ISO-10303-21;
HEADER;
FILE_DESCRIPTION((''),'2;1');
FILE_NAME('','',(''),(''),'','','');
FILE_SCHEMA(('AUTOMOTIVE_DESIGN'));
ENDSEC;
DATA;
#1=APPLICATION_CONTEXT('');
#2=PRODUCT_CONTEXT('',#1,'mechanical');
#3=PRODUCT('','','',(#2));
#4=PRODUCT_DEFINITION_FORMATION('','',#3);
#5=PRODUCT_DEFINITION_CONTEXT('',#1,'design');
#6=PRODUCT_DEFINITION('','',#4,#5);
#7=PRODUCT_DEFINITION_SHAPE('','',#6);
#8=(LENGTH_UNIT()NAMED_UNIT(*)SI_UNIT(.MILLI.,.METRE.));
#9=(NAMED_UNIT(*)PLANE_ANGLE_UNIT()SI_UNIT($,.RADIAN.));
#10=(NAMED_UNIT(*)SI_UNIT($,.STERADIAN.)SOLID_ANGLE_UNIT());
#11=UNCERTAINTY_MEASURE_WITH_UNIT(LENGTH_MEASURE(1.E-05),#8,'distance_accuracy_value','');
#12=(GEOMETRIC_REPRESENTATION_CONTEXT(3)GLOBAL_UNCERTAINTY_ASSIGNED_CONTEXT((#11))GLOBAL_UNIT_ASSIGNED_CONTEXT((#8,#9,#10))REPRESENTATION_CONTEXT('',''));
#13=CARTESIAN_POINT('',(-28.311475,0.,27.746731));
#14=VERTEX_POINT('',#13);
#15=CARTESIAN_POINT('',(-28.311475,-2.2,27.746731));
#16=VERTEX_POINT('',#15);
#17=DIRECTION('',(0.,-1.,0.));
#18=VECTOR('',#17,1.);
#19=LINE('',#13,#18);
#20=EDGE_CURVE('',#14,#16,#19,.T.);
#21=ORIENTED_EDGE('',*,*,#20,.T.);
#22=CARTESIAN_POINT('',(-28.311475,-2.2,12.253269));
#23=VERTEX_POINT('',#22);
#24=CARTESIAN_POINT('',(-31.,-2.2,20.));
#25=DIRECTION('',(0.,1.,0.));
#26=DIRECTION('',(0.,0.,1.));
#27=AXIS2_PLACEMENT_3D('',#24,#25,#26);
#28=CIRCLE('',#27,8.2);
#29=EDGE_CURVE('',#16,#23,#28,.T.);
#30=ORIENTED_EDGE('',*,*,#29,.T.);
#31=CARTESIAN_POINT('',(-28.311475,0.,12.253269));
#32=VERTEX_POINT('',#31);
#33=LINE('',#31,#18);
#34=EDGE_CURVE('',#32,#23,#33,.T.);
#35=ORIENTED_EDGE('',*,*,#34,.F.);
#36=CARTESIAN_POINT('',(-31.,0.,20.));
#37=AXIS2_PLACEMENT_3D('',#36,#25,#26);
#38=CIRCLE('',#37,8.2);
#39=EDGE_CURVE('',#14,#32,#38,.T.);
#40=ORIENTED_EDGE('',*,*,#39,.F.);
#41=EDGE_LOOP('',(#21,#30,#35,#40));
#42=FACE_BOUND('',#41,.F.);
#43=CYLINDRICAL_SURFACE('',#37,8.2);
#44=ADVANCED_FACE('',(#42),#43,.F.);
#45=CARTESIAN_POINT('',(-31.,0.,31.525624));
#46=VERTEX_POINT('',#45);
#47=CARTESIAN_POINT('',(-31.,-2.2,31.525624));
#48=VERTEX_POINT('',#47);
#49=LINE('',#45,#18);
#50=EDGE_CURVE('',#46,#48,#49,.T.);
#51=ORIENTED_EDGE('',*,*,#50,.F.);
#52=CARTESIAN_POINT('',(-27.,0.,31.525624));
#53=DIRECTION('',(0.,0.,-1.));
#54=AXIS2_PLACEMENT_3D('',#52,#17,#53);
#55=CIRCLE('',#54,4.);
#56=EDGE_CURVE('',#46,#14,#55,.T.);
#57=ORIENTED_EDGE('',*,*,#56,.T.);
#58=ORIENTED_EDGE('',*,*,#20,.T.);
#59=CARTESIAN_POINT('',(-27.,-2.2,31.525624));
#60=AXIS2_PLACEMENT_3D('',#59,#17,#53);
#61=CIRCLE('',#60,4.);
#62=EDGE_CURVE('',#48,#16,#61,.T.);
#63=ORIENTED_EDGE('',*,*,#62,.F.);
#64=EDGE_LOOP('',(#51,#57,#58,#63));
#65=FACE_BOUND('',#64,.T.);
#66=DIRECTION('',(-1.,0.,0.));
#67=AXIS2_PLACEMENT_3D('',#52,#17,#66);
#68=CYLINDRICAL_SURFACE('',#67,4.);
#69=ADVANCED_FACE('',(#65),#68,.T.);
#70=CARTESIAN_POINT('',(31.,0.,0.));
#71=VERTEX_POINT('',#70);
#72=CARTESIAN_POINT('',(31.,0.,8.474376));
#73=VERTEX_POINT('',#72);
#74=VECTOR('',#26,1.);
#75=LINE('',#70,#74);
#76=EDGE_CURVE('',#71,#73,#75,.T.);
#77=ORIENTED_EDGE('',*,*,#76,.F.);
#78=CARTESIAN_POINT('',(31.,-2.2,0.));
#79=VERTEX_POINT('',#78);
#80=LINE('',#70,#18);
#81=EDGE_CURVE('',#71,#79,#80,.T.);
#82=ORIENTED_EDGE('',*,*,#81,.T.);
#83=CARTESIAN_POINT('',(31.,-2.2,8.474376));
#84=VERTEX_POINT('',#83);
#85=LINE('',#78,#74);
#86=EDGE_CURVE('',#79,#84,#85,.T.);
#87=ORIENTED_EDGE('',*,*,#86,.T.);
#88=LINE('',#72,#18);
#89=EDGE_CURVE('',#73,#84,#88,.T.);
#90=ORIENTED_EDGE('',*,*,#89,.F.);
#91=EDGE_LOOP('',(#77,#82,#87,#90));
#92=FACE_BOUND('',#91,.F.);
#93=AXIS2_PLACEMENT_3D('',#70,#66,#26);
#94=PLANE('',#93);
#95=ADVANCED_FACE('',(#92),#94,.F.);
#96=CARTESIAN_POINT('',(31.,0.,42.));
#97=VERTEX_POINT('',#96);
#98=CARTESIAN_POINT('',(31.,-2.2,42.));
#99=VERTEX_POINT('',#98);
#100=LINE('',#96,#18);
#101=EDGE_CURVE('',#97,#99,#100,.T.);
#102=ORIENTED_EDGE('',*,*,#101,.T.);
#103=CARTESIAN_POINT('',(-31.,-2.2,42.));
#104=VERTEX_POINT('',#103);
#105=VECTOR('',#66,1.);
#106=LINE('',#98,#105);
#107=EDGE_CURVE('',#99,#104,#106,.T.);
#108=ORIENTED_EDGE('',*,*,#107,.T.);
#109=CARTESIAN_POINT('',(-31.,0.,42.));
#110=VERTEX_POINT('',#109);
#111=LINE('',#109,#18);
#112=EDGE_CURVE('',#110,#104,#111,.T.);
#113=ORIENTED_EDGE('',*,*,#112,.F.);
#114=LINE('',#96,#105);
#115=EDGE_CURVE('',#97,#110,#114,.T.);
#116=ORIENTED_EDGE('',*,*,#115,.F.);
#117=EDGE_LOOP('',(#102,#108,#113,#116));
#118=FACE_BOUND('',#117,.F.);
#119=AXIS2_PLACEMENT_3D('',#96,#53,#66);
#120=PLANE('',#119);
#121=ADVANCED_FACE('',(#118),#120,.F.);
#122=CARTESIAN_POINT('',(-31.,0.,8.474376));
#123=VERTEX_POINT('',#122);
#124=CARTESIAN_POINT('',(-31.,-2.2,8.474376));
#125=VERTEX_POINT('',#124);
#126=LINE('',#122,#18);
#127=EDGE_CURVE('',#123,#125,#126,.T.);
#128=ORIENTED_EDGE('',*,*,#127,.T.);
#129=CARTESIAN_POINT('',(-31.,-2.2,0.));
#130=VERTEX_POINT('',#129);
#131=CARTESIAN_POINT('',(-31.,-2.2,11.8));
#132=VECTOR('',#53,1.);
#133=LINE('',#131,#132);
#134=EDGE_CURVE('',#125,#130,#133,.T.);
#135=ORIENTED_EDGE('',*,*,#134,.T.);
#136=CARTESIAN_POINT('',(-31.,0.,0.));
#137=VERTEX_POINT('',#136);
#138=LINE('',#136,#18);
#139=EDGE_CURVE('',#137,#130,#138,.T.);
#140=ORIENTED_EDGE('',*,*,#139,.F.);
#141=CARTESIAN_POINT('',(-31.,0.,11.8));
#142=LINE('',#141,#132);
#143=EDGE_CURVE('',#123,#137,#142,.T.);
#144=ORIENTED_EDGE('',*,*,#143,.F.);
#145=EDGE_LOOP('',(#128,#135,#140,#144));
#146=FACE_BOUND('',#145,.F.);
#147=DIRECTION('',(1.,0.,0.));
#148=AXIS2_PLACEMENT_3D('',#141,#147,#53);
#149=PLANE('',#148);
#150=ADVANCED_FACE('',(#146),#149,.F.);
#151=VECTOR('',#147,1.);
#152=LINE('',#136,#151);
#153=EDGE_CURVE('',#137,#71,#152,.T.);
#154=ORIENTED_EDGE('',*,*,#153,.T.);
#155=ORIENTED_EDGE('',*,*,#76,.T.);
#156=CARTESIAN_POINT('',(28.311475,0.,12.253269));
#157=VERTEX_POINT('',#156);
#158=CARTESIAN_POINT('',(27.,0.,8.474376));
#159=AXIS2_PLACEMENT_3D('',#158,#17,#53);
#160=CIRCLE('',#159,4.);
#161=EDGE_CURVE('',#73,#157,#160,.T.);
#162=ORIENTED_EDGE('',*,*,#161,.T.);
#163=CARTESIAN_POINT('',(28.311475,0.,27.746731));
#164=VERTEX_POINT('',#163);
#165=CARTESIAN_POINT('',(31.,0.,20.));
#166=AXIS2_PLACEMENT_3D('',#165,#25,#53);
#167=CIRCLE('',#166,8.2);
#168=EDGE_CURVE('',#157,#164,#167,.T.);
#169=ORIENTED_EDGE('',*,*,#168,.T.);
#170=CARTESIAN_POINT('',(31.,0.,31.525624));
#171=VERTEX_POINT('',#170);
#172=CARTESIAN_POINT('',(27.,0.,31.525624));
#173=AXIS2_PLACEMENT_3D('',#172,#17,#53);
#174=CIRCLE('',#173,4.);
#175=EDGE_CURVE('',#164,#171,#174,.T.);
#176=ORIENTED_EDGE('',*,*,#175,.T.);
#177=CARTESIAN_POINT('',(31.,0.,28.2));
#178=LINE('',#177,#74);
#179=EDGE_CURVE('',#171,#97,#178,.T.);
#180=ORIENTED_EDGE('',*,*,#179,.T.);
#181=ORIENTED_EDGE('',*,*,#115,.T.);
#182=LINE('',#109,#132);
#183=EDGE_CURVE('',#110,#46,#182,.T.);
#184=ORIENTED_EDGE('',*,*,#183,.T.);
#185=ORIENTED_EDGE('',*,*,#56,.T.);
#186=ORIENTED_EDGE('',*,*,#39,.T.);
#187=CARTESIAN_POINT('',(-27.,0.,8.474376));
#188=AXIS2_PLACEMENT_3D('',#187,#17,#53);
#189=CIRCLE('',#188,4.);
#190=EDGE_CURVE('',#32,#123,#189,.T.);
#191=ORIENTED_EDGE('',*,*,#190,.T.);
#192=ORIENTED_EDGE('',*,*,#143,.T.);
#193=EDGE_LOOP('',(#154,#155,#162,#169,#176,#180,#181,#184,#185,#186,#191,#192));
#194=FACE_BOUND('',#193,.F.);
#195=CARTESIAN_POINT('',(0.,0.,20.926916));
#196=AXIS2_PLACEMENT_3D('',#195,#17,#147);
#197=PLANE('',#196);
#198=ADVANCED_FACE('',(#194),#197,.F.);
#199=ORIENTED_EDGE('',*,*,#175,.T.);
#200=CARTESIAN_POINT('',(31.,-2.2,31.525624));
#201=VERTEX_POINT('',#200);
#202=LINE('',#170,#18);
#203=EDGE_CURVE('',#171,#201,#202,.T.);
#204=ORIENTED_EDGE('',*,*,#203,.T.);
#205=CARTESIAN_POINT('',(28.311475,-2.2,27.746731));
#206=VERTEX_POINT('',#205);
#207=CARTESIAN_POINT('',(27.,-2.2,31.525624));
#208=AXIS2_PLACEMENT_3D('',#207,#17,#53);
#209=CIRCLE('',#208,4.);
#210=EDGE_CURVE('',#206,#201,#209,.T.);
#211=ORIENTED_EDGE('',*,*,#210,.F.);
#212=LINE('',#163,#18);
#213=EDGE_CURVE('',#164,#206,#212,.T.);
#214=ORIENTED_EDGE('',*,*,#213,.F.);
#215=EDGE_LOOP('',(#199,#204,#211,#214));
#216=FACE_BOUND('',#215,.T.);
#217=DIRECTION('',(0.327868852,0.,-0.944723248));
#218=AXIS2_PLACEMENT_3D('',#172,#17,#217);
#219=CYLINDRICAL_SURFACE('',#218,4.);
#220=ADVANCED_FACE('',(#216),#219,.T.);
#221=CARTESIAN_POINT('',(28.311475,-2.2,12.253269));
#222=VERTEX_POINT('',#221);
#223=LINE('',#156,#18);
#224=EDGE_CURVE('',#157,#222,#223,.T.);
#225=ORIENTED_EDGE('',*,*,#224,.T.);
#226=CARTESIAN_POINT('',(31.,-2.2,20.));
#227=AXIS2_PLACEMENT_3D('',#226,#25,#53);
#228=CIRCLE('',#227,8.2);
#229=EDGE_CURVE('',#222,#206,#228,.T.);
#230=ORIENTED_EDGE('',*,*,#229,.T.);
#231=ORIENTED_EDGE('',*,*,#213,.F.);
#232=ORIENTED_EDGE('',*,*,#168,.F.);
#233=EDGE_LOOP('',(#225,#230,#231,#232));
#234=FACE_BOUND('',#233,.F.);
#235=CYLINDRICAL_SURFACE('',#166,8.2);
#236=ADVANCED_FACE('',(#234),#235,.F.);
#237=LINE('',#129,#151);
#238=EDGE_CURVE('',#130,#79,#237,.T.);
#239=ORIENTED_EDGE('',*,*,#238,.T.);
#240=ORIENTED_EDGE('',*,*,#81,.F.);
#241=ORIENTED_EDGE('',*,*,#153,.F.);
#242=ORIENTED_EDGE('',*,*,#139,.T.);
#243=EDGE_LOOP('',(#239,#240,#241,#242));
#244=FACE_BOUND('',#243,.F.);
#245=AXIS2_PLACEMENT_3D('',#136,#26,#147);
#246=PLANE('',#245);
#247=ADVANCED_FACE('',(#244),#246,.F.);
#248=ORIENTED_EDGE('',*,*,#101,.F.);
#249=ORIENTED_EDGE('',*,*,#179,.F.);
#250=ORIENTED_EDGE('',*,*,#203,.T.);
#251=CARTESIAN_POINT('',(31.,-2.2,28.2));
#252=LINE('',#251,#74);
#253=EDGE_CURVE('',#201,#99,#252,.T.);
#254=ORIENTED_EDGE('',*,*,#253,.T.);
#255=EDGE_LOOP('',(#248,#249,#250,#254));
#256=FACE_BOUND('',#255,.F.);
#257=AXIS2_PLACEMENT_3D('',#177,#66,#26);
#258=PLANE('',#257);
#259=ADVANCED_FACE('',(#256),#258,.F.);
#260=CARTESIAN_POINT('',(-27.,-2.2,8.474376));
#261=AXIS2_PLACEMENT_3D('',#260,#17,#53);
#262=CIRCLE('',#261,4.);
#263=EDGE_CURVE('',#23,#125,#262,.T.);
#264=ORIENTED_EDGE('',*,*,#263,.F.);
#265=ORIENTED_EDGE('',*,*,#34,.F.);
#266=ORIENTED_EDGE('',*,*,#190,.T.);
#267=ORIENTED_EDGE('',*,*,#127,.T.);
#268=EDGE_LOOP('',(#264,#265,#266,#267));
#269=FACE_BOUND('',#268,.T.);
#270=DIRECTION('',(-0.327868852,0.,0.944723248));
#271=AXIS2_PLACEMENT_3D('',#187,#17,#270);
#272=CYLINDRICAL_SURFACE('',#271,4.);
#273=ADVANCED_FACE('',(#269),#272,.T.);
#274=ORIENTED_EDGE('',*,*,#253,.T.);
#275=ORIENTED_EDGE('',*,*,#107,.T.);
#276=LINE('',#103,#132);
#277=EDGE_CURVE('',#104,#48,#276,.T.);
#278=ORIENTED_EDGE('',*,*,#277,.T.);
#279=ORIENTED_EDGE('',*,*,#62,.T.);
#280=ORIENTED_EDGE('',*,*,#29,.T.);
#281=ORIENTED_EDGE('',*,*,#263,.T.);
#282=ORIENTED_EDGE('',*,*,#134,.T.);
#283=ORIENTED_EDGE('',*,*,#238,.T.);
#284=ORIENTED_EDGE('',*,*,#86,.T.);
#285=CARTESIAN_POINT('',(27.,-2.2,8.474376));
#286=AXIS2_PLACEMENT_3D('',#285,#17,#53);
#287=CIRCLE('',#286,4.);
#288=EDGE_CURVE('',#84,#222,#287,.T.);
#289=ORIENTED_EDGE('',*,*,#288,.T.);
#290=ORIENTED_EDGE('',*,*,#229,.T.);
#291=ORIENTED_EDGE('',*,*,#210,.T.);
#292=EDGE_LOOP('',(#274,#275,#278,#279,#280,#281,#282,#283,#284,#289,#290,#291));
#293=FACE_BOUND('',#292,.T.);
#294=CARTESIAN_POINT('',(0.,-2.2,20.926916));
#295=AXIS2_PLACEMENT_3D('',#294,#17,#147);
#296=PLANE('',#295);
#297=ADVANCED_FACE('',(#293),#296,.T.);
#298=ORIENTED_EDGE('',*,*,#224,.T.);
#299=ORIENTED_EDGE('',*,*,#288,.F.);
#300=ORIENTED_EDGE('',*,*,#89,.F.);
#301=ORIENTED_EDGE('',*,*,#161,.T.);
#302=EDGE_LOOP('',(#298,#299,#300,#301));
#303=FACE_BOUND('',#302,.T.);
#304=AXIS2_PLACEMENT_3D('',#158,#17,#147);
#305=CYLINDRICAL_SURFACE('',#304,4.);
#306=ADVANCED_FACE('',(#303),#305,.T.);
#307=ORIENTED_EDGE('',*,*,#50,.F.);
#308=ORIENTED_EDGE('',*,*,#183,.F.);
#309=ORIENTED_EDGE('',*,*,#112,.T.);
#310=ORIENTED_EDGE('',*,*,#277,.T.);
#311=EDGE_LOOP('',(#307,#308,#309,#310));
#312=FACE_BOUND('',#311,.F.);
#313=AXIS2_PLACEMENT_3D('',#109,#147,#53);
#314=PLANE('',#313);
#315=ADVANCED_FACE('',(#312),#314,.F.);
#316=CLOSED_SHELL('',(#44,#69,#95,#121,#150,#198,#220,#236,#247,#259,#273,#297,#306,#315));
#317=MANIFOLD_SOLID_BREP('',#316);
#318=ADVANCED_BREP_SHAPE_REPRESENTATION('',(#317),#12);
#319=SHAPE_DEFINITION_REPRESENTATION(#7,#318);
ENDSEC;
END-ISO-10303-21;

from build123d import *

# Parameters (mm, degrees)
F1_DEPTH = 2.2
F2_R     = 4


with BuildPart() as f1:
    # F0 (on Front) → F1 (new body)
    with BuildSketch(Plane.XZ):
        with BuildLine():
            Line((-31, 0), (31, 0))
            Line((31, 0), (31, 11.8))
            ThreePointArc((31, 11.8), (22.8, 20), (31, 28.2))
            Line((31, 28.2), (31, 42))
            Line((31, 42), (-31, 42))
            Line((-31, 42), (-31, 28.2))
            ThreePointArc((-31, 28.2), (-22.8, 20), (-31, 11.8))
            Line((-31, 11.8), (-31, 0))
        make_face()
    extrude(amount=F1_DEPTH)

    # F2
    f2_edges = [f1.edges().sort_by_distance(p)[0] for p in [
        (-31, -1.1, 11.8),
        (31, -1.1, 11.8),
        (31, -1.1, 28.2),
        (-31, -1.1, 28.2),
    ]]
    fillet(f2_edges, radius=F2_R)


solid = f1.part
